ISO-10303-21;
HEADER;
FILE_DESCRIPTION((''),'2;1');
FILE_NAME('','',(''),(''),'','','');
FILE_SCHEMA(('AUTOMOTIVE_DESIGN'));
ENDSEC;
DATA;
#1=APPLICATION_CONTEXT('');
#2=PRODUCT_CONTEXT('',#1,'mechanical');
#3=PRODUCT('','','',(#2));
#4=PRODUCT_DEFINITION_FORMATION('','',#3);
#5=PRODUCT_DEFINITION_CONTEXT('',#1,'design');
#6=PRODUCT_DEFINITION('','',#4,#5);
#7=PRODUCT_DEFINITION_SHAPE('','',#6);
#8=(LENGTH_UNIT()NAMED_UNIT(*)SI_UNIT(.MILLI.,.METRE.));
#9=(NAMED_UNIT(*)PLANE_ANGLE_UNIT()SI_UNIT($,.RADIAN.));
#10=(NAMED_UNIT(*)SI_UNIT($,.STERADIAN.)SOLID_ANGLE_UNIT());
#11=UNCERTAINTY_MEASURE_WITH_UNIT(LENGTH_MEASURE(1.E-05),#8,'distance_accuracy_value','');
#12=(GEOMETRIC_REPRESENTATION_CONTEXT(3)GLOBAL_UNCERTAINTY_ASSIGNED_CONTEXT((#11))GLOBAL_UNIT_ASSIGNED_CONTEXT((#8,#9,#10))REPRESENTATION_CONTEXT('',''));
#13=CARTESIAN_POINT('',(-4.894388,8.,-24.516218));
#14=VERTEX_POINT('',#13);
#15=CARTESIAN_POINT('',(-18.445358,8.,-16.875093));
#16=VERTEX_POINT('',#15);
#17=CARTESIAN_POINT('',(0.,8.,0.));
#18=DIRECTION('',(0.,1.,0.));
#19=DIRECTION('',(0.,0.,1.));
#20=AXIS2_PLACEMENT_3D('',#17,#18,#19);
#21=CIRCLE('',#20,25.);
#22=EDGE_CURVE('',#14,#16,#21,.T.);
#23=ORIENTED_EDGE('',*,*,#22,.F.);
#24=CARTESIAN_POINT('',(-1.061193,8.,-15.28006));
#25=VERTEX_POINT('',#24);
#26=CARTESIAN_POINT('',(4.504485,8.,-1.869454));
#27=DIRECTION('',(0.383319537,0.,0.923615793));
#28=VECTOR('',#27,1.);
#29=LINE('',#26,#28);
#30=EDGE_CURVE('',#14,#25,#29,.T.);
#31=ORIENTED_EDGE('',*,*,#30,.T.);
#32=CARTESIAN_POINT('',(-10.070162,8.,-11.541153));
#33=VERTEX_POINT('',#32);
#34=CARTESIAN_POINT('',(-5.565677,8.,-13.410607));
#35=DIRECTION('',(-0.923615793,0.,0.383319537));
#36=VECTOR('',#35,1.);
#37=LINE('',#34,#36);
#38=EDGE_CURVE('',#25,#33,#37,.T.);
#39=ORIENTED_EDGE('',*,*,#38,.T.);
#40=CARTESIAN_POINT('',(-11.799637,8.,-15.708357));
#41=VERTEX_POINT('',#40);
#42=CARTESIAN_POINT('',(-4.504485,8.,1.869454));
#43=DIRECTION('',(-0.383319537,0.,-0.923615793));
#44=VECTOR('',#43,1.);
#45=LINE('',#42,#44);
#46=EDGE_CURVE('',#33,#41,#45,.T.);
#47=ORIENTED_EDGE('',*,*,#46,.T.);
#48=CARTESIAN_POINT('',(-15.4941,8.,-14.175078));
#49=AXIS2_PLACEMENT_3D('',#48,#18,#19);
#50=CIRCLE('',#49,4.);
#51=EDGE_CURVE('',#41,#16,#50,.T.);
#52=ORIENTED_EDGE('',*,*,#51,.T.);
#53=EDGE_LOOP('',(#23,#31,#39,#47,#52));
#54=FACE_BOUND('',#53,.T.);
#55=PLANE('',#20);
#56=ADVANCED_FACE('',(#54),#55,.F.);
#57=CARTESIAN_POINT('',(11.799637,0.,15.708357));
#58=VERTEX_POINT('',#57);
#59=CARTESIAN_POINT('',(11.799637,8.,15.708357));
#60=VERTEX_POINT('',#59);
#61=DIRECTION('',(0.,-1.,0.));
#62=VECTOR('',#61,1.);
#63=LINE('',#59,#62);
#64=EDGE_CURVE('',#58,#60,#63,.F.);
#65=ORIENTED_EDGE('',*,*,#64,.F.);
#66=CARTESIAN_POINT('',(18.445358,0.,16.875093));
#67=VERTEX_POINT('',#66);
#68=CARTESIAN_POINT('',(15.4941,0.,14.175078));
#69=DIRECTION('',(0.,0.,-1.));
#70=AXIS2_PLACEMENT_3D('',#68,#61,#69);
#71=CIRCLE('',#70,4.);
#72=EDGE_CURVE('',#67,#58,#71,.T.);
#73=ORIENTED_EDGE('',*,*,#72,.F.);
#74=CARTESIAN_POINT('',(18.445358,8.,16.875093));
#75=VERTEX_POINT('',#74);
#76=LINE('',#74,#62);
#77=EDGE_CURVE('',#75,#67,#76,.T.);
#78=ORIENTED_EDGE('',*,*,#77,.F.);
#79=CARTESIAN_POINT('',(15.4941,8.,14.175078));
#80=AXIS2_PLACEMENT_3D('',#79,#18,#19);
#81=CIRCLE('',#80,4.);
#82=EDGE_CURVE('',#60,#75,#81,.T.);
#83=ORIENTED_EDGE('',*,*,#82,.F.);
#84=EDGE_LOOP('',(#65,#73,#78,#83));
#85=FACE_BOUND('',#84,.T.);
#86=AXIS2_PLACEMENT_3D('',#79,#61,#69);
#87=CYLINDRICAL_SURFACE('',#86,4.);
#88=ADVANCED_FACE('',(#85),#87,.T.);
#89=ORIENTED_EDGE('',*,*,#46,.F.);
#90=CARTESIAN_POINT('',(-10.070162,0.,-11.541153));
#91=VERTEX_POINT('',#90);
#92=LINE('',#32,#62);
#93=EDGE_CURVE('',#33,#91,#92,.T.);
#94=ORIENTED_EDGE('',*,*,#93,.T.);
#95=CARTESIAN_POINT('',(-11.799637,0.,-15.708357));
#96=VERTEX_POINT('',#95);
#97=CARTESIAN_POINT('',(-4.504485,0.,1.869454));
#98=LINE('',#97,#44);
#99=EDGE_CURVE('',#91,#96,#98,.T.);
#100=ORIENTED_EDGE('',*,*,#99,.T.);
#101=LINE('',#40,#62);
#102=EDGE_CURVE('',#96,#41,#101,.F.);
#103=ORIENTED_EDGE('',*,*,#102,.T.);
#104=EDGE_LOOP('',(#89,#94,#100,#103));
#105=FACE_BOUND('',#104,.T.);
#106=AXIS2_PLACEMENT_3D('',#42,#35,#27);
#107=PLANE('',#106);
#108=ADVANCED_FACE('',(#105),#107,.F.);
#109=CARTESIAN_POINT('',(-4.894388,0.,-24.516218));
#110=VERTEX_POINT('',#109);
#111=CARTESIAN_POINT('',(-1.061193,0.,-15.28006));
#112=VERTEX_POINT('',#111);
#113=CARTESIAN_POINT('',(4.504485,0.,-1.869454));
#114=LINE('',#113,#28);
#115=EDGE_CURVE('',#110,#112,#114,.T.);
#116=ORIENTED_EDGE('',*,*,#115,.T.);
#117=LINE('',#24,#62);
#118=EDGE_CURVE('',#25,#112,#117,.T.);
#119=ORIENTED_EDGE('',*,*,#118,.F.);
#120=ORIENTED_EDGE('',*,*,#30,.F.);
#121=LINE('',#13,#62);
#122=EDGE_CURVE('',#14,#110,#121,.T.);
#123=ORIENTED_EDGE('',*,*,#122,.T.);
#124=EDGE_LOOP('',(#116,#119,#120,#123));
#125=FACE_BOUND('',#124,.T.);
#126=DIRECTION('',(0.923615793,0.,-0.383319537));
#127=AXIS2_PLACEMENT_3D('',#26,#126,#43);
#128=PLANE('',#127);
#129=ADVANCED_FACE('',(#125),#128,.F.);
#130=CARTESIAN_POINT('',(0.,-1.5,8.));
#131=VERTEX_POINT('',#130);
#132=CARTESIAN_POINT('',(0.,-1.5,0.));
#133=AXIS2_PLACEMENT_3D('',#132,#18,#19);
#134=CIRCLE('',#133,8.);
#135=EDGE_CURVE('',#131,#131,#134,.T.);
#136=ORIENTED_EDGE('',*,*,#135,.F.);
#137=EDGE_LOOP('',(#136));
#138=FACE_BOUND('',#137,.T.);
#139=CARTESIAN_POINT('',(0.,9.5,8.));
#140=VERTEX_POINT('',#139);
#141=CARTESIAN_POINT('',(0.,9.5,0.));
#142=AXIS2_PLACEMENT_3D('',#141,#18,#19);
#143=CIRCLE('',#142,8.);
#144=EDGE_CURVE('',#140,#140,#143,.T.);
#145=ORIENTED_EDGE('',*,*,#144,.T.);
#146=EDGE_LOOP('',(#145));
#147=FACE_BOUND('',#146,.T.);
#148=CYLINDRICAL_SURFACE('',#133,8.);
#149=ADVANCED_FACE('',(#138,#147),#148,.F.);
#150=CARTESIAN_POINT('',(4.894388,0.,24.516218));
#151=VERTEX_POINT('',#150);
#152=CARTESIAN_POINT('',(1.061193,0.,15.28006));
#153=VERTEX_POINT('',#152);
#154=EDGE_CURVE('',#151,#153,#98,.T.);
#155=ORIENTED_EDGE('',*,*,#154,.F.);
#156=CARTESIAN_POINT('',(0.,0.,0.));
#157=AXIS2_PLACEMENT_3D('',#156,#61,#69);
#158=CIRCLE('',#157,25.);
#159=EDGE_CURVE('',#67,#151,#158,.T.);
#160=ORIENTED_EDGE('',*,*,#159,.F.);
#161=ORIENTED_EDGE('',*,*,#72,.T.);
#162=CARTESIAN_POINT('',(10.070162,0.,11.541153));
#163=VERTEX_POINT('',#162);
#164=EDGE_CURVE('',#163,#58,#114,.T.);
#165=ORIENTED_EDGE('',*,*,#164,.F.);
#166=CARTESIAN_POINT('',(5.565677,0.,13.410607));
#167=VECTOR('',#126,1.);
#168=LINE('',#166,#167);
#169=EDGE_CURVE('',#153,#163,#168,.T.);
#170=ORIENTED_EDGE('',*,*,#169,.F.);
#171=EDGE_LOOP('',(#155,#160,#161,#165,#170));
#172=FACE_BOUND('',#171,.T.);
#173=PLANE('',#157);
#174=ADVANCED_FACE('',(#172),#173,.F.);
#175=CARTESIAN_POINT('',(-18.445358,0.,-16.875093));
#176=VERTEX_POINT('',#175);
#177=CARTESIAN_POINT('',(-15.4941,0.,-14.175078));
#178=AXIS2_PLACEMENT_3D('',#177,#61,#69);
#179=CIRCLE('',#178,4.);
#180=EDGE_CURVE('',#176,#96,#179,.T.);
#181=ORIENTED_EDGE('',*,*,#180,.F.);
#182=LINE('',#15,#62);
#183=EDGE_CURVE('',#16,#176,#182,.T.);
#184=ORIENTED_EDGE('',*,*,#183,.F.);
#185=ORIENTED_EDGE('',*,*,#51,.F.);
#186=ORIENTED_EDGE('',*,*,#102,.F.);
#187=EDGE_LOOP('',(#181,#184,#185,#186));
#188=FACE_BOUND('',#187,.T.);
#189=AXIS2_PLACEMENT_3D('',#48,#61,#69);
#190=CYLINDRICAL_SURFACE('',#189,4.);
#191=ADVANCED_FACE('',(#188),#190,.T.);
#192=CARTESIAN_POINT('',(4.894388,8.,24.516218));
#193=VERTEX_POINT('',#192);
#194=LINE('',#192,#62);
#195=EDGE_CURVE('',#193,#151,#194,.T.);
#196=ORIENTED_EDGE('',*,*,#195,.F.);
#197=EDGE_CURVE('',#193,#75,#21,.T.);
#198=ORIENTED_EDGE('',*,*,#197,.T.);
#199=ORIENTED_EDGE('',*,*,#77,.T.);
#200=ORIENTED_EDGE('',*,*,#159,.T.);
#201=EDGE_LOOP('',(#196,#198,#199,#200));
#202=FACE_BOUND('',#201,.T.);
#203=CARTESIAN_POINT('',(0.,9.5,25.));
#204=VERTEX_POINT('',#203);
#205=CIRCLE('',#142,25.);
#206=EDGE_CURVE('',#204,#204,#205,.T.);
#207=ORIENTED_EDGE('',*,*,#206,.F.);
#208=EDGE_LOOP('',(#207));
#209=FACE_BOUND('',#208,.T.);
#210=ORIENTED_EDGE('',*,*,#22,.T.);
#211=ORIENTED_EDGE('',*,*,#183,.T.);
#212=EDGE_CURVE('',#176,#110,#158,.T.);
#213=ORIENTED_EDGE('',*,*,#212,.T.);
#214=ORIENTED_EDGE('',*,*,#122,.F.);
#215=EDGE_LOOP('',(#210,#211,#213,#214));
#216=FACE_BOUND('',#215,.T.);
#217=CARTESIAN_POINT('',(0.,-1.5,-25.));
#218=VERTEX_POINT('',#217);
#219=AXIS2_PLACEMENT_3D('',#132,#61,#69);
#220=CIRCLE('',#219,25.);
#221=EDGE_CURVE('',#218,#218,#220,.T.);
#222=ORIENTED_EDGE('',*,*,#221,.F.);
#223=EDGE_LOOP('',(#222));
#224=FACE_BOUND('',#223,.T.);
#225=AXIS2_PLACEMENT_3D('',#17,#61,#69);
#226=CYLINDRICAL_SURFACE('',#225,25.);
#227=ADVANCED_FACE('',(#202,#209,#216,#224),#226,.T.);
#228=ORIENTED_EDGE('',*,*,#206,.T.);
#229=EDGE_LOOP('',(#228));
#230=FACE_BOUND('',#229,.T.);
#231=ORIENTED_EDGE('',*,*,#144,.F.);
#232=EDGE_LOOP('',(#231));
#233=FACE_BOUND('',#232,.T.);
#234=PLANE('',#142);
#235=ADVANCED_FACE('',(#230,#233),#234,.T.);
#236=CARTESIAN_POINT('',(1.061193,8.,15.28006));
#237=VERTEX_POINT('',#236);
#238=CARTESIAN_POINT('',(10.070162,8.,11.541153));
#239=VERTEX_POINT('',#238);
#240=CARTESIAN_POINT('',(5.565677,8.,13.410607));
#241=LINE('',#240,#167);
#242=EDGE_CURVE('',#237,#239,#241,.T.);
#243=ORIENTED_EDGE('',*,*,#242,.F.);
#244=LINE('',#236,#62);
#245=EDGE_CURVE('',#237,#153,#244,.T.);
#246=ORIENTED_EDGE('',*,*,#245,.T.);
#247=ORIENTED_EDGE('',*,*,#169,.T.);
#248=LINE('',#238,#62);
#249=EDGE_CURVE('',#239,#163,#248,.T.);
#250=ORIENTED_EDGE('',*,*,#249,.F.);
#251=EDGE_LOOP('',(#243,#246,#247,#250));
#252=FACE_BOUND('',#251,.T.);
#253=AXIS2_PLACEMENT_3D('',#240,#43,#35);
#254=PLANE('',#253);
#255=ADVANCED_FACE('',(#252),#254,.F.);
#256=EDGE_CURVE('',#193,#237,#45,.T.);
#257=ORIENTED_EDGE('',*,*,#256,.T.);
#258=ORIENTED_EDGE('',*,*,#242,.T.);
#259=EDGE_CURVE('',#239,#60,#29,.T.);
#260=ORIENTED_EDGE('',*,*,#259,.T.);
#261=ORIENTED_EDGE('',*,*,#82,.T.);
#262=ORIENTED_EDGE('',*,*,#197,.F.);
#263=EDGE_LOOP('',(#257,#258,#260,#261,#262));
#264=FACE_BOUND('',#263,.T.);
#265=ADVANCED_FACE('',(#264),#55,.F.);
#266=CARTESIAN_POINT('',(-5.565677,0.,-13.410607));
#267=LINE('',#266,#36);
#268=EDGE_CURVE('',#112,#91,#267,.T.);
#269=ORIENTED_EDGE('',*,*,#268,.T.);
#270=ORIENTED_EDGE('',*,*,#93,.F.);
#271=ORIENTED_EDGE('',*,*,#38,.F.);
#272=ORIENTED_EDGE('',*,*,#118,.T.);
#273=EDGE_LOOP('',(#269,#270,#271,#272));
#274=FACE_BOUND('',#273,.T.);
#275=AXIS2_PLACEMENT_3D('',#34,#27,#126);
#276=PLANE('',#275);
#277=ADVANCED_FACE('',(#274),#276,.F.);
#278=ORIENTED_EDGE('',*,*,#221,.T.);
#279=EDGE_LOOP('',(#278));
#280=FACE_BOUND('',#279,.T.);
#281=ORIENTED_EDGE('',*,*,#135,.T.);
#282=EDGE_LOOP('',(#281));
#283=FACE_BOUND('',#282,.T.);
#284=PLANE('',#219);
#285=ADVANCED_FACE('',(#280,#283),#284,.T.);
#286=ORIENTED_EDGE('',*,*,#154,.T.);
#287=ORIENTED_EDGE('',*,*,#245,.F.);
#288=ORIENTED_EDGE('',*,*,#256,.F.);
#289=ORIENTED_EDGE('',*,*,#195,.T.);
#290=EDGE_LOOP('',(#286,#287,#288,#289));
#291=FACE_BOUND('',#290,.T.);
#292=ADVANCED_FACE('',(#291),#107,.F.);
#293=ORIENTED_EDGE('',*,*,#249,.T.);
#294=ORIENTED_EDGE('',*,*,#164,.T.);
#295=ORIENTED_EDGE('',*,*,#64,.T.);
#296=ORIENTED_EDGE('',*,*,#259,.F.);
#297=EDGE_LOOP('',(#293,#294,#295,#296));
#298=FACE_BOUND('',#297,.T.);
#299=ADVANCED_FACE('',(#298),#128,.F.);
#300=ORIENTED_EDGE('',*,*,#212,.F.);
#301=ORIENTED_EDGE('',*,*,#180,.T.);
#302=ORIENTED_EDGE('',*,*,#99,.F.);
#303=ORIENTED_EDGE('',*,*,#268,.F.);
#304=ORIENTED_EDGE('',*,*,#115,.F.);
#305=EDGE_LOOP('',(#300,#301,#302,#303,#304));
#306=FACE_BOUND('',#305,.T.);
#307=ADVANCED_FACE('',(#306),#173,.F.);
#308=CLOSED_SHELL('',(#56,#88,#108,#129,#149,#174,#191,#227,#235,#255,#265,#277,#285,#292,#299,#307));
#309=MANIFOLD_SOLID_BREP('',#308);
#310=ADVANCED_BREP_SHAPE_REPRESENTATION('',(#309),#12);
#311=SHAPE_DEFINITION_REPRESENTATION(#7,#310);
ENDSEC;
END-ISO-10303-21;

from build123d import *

# Parameters (mm, degrees)
BOSS_EXTRUDE1_DEPTH = 8
SKETCH2_R           = 25
BOSS_EXTRUDE2_DEPTH = 1.5
BOSS_EXTRUDE3_START = 1.5
SKETCH3_R           = 25
BOSS_EXTRUDE3_DEPTH = 1.5
SKETCH4_R           = 8
CUT_EXTRUDE1_DEPTH  = 38.027017163
FILLET1_R           = 4


with BuildPart() as part:
    # Sketch1 → Boss-Extrude1 (new body)
    with BuildSketch(Plane(origin=(0, 0, 0), x_dir=(1, 0, 0), z_dir=(0, 1, 0))):
        with BuildLine():
            ThreePointArc((-13.903357517, 20.777310936), (-23.090394822, -9.582988415), (4.894388058, -24.516218418))
            Line((4.894388058, -24.516218418), (1.061192692, -15.28006049))
            Line((1.061192692, -15.28006049), (10.070162151, -11.541153008))
            Line((10.070162151, -11.541153008), (13.903357517, -20.777310936))
            ThreePointArc((13.903357517, -20.777310936), (22.052028681, -11.777437371), (25, 0))
            ThreePointArc((25, 0), (15.85308012, 19.330800571), (-4.894388058, 24.516218418))
            Line((-4.894388058, 24.516218418), (-1.061192692, 15.28006049))
            Line((-1.061192692, 15.28006049), (-10.070162151, 11.541153008))
            Line((-10.070162151, 11.541153008), (-13.903357517, 20.777310936))
        make_face()
    extrude(amount=BOSS_EXTRUDE1_DEPTH)

    # Sketch2 → Boss-Extrude2 (add)
    with BuildSketch(Plane(origin=(0, 8, 0), x_dir=(1, 0, 0), z_dir=(0, 1, 0))):
        with Locations(Location((0, 0, 0), (0, 0, 101.290031001))):
            Circle(SKETCH2_R)
    extrude(amount=BOSS_EXTRUDE2_DEPTH)

    # Sketch3 → Boss-Extrude3 (add)
    with BuildSketch(Plane(origin=(0, 0, 0), x_dir=(-1, 0, 0), z_dir=(0, -1, 0)).offset(BOSS_EXTRUDE3_START)):
        with Locations(Location((0, 0, 0), (0, 0, 90))):
            Circle(SKETCH3_R)
    extrude(amount=-BOSS_EXTRUDE3_DEPTH)

    # Sketch4 → Cut-Extrude1 (cut, through all)
    with BuildSketch(Plane(origin=(0, 9.5, 0), x_dir=(1, 0, 0), z_dir=(0, 1, 0))):
        with Locations(Location((0, 0, 0), (0, 0, 270))):
            Circle(SKETCH4_R)
    extrude(amount=-CUT_EXTRUDE1_DEPTH, mode=Mode.SUBTRACT)

    # Fillet1
    # the kernel refuses this fillet: 4 mm, written as the material it takes off along each edge
    with BuildSketch(Plane(origin=(-13.903357517, 0, -20.777310936), x_dir=(-0.7585073029856567, 0, 0.6516645389442524), z_dir=(0, 1, 0)), Plane(origin=(13.903357517, 0, 20.777310936), x_dir=(0.7585073029856618, 0, -0.6516645389442466), z_dir=(0, 1, 0))) as fillet1_piece_1:
        with BuildLine():
            CenterArc((5.509030911, 3.971210744), FILLET1_R, 161.872235739, 115.006104931)
            Line((1.707570619, 5.215758711), (0, 0))
            ThreePointArc((0, 0), (2.994038539, -0.179932852), (5.988077078, 0))
        make_face()
    extrude(amount=8, mode=Mode.SUBTRACT)


solid = part.part
